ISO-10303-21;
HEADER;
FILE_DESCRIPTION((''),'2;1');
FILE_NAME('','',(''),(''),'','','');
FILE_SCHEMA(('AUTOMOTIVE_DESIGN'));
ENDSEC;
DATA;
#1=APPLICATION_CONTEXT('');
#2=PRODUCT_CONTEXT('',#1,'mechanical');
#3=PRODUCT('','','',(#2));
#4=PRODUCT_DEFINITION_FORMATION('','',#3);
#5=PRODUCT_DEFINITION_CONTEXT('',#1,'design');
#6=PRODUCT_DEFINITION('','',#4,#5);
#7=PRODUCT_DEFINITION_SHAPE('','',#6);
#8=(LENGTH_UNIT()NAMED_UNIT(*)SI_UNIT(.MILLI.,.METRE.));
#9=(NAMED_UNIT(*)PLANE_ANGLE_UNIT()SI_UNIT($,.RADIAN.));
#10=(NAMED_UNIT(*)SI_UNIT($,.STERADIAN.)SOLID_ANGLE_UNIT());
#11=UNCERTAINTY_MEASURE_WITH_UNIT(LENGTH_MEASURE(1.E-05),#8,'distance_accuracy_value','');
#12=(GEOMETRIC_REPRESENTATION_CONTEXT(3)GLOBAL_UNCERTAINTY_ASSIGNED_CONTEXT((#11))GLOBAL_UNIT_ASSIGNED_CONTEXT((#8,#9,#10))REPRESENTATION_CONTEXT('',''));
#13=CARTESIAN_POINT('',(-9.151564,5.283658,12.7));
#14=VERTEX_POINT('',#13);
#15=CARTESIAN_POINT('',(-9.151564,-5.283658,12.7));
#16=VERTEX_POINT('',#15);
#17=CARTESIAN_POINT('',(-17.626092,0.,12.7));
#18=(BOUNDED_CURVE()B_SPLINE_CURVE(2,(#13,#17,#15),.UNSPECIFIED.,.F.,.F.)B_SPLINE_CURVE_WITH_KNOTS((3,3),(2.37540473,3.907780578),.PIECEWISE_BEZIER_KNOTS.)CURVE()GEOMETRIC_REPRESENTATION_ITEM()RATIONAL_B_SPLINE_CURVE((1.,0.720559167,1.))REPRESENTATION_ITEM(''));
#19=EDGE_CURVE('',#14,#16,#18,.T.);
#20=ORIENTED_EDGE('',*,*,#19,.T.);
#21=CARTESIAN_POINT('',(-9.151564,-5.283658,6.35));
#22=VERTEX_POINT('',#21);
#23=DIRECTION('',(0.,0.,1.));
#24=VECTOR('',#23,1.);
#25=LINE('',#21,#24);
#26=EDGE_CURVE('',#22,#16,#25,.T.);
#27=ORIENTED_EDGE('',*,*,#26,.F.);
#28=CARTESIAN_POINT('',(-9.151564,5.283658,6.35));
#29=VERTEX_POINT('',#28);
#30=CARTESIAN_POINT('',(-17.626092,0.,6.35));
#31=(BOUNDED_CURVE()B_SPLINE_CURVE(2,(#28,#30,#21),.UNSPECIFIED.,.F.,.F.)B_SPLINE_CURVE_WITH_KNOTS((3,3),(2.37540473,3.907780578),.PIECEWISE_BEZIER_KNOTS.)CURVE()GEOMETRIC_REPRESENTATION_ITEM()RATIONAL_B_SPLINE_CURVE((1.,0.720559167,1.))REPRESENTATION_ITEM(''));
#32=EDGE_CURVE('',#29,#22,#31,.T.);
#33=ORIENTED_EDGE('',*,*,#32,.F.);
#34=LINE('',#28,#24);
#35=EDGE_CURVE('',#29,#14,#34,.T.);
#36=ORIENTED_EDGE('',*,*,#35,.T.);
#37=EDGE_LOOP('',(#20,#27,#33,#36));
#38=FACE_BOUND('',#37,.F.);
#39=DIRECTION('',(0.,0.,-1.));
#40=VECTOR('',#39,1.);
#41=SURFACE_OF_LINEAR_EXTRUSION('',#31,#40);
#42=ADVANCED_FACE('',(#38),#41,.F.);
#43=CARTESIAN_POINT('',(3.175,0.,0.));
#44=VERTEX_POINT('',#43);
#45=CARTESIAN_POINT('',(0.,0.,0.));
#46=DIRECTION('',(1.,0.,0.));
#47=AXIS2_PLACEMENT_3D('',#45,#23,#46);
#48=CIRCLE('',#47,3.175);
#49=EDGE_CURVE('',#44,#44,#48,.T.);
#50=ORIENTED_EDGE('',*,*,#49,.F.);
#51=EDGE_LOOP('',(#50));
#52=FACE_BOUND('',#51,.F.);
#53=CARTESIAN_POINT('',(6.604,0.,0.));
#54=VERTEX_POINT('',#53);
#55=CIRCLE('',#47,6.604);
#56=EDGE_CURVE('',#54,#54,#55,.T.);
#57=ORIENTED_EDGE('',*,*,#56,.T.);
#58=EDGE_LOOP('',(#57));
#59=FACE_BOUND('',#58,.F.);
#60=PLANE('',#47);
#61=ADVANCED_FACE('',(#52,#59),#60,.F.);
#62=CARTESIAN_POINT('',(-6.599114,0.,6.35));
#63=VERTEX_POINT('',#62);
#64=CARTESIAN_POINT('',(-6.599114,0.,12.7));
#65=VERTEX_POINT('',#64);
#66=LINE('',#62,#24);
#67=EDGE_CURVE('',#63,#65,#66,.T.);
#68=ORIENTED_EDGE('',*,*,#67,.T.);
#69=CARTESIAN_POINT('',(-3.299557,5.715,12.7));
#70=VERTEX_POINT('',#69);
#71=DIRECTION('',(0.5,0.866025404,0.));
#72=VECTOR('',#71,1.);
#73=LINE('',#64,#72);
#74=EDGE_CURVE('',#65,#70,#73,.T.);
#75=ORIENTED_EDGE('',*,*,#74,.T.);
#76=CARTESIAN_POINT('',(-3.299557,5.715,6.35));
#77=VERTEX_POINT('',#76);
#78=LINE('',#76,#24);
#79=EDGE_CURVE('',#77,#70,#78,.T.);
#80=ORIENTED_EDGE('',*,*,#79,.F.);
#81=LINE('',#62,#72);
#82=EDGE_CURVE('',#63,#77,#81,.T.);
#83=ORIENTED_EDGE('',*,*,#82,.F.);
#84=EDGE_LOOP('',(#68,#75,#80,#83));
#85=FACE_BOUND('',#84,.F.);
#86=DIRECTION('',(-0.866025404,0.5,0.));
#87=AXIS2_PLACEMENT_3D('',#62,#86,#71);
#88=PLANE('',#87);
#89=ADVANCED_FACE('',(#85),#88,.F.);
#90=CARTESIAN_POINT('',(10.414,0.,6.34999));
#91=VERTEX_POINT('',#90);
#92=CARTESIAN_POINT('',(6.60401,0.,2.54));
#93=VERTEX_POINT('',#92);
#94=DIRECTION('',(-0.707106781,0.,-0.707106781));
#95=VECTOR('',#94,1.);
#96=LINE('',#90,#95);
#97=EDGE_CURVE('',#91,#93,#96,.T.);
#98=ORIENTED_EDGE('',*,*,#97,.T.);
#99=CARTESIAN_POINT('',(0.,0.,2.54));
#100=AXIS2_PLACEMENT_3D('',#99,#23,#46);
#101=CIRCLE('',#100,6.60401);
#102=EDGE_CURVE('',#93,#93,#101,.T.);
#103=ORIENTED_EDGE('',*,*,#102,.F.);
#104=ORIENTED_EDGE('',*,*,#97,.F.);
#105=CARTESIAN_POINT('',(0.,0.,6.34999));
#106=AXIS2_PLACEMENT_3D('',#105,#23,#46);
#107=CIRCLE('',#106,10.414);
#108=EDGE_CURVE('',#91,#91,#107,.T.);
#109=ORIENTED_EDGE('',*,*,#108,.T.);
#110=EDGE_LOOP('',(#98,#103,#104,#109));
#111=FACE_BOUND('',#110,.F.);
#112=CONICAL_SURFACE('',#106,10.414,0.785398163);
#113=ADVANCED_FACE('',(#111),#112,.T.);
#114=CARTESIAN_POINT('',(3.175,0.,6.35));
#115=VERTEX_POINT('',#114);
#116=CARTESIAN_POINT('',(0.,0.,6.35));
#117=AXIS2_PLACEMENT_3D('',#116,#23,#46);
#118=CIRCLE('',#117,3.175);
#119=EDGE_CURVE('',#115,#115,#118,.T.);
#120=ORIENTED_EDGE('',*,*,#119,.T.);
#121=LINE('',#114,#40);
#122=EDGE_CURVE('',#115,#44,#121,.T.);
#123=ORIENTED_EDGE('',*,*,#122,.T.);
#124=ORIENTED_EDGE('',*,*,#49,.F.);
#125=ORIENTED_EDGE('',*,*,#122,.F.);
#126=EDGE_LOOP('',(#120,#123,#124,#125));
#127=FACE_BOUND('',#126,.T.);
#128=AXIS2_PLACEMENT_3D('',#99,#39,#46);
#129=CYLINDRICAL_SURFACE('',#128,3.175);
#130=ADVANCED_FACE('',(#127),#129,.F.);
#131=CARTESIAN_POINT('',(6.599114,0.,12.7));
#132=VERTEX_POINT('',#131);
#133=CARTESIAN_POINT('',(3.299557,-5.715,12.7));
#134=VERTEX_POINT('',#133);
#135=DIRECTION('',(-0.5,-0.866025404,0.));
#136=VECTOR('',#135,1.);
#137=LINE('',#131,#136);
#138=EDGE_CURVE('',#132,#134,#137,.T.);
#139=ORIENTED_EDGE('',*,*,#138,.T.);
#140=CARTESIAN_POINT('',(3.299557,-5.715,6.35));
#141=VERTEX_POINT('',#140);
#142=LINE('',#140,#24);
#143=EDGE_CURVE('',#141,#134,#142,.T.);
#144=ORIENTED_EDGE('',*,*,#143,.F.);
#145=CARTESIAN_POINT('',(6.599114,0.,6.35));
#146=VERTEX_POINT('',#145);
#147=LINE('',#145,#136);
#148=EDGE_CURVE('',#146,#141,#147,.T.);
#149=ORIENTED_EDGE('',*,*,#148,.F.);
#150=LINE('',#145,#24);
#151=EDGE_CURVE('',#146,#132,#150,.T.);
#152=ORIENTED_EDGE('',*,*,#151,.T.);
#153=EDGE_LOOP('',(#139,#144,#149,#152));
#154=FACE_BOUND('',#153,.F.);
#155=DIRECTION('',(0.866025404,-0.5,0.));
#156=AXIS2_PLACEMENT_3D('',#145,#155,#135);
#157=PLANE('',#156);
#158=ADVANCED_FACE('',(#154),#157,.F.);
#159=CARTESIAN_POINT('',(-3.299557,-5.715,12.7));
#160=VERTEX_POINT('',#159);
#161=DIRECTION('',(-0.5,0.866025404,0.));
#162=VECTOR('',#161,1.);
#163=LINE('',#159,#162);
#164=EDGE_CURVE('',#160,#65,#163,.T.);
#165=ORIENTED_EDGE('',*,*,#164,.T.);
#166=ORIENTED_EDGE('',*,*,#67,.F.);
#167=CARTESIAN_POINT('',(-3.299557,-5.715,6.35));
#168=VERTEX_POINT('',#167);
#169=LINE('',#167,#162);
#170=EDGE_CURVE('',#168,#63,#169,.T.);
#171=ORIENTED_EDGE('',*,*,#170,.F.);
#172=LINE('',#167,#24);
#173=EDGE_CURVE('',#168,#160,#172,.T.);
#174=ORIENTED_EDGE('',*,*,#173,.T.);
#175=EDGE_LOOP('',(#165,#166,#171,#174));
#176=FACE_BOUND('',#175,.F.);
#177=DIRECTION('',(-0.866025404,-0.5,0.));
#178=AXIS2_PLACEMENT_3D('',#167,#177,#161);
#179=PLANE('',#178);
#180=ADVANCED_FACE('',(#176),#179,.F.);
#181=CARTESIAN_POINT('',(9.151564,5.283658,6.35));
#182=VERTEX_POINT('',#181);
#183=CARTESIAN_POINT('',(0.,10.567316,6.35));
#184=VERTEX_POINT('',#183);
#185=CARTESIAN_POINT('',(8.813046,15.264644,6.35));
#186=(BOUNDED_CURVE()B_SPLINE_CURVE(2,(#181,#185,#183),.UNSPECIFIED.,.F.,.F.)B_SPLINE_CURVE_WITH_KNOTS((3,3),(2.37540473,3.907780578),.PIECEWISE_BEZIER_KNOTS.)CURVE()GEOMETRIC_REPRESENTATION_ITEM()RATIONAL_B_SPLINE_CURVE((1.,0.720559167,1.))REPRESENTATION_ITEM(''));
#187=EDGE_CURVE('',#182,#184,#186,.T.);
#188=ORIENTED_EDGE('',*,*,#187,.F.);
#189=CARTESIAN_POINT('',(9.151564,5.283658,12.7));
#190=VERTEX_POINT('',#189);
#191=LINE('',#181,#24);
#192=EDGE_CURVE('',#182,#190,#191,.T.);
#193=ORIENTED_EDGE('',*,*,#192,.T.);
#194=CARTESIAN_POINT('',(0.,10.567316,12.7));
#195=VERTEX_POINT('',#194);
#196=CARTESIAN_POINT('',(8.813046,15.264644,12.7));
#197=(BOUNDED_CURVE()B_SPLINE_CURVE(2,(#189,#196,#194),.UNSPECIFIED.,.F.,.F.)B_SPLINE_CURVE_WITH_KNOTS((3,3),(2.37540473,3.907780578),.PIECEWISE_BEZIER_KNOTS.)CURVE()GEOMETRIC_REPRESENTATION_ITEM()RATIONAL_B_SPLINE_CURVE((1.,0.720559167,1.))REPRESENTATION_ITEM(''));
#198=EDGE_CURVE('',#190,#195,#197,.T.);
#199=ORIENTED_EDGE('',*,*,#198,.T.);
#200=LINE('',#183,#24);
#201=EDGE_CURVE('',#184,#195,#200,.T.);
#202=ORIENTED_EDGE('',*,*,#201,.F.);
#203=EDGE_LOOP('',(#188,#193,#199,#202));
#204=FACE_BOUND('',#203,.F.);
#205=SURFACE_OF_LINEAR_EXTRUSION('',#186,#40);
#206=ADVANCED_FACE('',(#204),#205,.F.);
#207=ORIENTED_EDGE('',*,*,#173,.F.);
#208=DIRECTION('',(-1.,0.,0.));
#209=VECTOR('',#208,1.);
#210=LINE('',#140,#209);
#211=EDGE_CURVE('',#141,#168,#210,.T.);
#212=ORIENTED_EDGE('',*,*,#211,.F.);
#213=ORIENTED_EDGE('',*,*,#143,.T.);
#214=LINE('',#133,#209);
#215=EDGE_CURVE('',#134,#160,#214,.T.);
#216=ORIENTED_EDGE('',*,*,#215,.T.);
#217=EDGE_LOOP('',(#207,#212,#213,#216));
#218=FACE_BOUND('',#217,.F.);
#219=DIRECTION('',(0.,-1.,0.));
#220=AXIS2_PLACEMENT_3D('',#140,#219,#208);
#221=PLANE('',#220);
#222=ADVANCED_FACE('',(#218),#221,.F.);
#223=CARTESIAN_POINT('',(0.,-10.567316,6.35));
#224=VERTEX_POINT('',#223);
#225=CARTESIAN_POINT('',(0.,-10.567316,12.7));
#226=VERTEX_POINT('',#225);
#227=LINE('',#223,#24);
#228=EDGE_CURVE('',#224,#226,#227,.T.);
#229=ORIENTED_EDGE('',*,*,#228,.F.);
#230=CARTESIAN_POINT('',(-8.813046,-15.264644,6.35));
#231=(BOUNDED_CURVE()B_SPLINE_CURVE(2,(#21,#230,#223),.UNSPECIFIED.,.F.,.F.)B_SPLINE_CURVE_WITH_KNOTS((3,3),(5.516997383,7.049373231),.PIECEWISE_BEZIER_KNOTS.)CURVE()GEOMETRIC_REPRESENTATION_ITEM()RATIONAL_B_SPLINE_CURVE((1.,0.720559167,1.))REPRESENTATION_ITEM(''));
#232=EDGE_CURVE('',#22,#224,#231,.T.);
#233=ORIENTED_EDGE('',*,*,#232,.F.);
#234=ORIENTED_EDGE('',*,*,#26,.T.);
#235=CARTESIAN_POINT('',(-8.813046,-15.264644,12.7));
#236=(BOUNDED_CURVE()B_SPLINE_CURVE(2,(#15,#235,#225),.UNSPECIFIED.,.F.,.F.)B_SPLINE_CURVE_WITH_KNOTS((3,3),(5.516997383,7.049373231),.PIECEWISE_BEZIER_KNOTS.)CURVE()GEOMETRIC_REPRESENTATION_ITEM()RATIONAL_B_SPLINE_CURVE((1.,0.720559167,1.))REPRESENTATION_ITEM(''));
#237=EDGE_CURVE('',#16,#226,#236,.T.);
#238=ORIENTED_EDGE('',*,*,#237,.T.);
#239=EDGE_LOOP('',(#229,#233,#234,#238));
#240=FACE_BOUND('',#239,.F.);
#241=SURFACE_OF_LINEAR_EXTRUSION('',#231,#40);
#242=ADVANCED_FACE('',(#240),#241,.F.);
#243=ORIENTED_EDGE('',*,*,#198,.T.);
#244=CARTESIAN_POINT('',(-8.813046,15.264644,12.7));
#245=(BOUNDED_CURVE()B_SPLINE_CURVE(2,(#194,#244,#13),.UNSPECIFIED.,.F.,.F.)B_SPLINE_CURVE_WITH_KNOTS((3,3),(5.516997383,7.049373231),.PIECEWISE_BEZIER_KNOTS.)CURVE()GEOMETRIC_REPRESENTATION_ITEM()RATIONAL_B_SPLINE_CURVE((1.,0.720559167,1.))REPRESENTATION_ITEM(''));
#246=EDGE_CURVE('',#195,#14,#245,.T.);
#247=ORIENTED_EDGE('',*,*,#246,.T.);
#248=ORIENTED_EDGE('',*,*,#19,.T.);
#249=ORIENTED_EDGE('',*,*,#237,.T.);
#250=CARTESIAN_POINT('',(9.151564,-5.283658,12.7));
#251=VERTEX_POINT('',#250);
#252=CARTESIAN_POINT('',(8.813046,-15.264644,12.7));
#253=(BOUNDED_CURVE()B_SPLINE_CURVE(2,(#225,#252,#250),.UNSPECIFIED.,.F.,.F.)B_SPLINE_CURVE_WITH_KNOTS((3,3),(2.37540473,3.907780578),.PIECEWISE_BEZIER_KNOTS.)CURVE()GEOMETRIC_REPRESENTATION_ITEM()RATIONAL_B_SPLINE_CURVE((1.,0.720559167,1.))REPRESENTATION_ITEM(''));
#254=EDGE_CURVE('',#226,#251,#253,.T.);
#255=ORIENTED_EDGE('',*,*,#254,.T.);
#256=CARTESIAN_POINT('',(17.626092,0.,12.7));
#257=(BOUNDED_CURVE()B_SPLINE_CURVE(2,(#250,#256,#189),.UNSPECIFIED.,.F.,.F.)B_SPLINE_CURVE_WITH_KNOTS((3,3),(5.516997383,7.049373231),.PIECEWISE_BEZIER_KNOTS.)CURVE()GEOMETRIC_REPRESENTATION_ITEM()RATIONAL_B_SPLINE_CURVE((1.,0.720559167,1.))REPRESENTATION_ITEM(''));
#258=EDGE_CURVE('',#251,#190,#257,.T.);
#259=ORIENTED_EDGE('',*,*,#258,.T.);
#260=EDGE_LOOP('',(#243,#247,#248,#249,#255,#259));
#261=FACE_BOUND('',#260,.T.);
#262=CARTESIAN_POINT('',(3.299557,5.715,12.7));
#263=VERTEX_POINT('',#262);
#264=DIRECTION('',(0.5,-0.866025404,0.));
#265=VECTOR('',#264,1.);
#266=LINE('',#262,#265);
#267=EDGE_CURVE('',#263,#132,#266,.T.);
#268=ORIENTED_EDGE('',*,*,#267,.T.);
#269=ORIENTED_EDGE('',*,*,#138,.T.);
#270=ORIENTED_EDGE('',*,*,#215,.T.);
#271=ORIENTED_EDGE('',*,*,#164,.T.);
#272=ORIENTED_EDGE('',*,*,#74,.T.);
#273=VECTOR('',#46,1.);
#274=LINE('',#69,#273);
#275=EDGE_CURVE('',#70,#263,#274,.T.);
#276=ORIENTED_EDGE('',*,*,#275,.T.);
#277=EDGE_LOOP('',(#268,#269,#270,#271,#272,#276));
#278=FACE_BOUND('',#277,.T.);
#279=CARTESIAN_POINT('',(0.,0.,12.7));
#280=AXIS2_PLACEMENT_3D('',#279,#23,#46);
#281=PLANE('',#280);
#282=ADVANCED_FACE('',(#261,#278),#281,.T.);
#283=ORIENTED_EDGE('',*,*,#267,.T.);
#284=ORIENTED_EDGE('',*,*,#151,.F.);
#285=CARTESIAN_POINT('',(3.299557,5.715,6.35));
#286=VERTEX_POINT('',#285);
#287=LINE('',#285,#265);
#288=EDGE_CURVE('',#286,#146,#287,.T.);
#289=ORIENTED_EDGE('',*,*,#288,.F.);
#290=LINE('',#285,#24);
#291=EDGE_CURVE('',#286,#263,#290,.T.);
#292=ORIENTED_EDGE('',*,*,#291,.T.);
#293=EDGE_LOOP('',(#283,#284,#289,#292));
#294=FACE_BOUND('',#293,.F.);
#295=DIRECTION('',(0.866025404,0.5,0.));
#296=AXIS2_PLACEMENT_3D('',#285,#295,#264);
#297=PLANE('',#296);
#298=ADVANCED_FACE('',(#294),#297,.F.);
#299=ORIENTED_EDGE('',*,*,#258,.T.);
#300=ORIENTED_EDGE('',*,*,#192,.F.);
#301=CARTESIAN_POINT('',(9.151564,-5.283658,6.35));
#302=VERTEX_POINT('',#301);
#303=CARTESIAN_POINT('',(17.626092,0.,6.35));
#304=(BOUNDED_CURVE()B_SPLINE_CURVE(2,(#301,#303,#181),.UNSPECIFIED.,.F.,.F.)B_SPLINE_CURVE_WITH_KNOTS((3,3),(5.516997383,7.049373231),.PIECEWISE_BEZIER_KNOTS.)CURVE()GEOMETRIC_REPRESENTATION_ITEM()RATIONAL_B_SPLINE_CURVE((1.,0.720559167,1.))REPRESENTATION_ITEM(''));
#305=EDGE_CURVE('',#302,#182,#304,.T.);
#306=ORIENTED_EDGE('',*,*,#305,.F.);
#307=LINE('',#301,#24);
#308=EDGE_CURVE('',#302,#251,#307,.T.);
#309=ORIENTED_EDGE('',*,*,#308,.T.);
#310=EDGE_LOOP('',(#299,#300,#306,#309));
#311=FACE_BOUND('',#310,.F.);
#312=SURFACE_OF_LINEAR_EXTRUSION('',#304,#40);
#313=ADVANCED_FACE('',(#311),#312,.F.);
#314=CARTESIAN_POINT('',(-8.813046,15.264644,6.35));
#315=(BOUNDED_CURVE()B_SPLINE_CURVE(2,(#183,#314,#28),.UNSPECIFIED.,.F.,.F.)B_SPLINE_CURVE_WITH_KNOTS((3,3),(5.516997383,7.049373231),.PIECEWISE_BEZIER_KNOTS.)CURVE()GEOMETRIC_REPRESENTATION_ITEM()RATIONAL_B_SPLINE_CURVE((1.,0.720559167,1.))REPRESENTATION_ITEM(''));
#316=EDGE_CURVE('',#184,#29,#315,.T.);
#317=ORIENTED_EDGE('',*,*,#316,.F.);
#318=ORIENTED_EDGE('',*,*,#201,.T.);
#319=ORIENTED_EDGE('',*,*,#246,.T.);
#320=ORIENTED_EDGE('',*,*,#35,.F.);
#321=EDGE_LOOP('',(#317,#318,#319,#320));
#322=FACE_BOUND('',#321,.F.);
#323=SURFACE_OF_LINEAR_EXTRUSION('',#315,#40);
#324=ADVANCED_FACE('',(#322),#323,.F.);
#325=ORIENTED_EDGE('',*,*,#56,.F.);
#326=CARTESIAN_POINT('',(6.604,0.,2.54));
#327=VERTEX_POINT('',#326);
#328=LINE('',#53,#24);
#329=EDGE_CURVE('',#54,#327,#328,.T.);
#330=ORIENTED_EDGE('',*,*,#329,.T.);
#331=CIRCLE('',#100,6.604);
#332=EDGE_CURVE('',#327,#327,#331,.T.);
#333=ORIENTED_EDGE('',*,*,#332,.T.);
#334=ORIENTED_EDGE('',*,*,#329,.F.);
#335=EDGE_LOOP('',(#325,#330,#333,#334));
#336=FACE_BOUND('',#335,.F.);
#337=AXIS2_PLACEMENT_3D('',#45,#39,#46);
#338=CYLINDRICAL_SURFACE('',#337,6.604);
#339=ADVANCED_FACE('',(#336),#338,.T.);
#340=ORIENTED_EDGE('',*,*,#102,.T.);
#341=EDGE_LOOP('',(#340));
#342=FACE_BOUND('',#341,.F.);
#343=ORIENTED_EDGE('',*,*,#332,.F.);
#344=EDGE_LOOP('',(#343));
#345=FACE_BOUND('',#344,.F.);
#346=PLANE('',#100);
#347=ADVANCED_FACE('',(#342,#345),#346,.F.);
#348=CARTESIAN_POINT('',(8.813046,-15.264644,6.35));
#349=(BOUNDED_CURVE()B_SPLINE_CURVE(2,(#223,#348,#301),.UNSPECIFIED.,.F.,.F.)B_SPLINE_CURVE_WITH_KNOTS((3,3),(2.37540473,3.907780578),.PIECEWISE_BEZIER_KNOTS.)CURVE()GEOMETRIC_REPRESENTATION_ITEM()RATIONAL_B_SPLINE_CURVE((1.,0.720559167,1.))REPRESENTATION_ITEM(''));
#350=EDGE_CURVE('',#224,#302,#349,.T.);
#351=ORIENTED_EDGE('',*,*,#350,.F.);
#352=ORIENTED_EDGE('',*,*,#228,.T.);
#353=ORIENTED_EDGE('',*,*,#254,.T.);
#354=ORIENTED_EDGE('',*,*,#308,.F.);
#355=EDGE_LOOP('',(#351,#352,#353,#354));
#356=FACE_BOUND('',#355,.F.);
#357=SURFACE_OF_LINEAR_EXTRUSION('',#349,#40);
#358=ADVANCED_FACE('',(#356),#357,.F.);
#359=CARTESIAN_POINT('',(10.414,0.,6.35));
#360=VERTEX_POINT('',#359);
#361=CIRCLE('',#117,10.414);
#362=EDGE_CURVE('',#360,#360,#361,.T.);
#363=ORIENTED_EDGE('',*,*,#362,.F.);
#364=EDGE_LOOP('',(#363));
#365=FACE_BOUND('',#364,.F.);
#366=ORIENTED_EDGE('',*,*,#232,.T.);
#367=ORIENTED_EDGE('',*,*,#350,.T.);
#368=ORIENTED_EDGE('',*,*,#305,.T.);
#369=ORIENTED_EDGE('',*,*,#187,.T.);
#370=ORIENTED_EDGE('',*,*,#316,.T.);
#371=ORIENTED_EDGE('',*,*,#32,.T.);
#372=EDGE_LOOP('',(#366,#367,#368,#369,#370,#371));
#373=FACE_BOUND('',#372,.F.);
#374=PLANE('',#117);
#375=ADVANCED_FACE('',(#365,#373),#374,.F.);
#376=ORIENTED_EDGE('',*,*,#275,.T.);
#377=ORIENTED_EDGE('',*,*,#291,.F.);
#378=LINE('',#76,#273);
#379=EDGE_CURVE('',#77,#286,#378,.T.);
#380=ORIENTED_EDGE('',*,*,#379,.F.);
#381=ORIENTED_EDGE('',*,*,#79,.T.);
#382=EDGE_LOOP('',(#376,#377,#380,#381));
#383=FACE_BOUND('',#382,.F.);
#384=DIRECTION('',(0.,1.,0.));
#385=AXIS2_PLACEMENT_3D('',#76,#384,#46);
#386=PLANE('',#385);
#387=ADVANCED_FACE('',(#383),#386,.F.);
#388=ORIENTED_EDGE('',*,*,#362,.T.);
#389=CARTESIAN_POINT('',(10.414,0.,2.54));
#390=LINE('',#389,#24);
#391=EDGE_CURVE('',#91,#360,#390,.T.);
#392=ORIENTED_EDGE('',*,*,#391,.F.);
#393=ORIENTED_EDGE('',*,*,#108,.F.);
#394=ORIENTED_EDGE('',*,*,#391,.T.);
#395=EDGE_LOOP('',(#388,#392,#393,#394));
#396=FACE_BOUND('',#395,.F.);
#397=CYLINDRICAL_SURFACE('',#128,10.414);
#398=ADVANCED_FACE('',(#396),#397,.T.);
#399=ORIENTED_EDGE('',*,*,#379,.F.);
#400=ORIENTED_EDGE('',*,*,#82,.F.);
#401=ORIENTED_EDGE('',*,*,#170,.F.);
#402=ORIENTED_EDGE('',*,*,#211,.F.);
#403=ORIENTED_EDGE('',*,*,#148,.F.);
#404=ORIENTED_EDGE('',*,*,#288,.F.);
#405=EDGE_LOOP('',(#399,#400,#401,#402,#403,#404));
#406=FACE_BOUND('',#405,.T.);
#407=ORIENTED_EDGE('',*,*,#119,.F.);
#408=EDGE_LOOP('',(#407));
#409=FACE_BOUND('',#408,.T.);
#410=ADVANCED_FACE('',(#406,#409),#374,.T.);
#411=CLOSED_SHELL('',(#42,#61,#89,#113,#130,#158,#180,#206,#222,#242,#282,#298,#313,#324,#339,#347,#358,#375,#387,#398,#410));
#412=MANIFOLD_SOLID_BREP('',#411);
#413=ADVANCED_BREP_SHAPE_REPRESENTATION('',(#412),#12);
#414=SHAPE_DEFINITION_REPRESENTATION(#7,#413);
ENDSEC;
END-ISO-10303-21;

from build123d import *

# Parameters (mm, degrees)
F0_R     = 6.604
F0_R_2   = 3.175
F1_DEPTH = 2.54
F2_R     = 10.414
F2_R_2   = 6.604
F2_R_3   = 3.175
F3_DEPTH = 3.81
F4_SIZE  = 3.80999
F6_DEPTH = 6.35


# Not quite as in the source:
# - a fillet or chamfer is up to 0.001 mm smaller than in the source, because OpenCascade refuses the exact size


with BuildPart() as f1:
    # F0 (on Top) → F1 (new body)
    with BuildSketch(Plane.XY):
        Circle(F0_R)
        Circle(F0_R_2, mode=Mode.SUBTRACT)
    extrude(amount=F1_DEPTH)

    # F2 (on face) → F3 (join)
    with BuildSketch(Plane.XY.offset(2.54)):
        Circle(F2_R)
        Circle(F2_R_2, mode=Mode.SUBTRACT)
        Circle(F2_R_2)
        Circle(F2_R_3, mode=Mode.SUBTRACT)
    extrude(amount=F3_DEPTH)

    # F4 (size 3.81 in the source; OpenCascade refuses exactly that, so slightly less here)
    f4_edges = [f1.edges().sort_by_distance(p)[0] for p in [
        (-10.414, 0, 2.54),
    ]]
    chamfer(f4_edges, length=F4_SIZE)

    # F5 (on face) → F6 (join)
    with BuildSketch(Plane.XY.offset(6.35)):
        with BuildLine():
            add(Edge.make_bspline(
                [(0, -10.5673162871), (8.8130461977, -15.2646437839), (9.1515643544, -5.2836581435)],
                knots=[2.3754047296, 2.3754047296, 2.3754047296, 3.9077805776, 3.9077805776, 3.9077805776], degree=2, weights=[1, 0.7205591673, 1]))
            add(Edge.make_bspline(
                [(9.1515643544, -5.2836581435), (17.6260923954, 0), (9.1515643544, 5.2836581435)],
                knots=[5.5169973832, 5.5169973832, 5.5169973832, 7.0493732312, 7.0493732312, 7.0493732312], degree=2, weights=[1, 0.7205591673, 1]))
            add(Edge.make_bspline(
                [(9.1515643544, 5.2836581435), (8.8130461977, 15.2646437839), (0, 10.5673162871)],
                knots=[2.3754047296, 2.3754047296, 2.3754047296, 3.9077805776, 3.9077805776, 3.9077805776], degree=2, weights=[1, 0.7205591673, 1]))
            add(Edge.make_bspline(
                [(0, 10.5673162871), (-8.8130461977, 15.2646437839), (-9.1515643544, 5.2836581435)],
                knots=[5.5169973832, 5.5169973832, 5.5169973832, 7.0493732312, 7.0493732312, 7.0493732312], degree=2, weights=[1, 0.7205591673, 1]))
            add(Edge.make_bspline(
                [(-9.1515643544, 5.2836581435), (-17.6260923954, 0), (-9.1515643544, -5.2836581435)],
                knots=[2.3754047296, 2.3754047296, 2.3754047296, 3.9077805776, 3.9077805776, 3.9077805776], degree=2, weights=[1, 0.7205591673, 1]))
            add(Edge.make_bspline(
                [(-9.1515643544, -5.2836581435), (-8.8130461977, -15.2646437839), (0, -10.5673162871)],
                knots=[5.5169973832, 5.5169973832, 5.5169973832, 7.0493732312, 7.0493732312, 7.0493732312], degree=2, weights=[1, 0.7205591673, 1]))
        make_face()
        Polygon((-6.5991135768, 0), (-3.2995567884, 5.715), (3.2995567884, 5.715), (6.5991135768, 0), (3.2995567884, -5.715), (-3.2995567884, -5.715), align=None, mode=Mode.SUBTRACT)
    extrude(amount=F6_DEPTH)


solid = f1.part
